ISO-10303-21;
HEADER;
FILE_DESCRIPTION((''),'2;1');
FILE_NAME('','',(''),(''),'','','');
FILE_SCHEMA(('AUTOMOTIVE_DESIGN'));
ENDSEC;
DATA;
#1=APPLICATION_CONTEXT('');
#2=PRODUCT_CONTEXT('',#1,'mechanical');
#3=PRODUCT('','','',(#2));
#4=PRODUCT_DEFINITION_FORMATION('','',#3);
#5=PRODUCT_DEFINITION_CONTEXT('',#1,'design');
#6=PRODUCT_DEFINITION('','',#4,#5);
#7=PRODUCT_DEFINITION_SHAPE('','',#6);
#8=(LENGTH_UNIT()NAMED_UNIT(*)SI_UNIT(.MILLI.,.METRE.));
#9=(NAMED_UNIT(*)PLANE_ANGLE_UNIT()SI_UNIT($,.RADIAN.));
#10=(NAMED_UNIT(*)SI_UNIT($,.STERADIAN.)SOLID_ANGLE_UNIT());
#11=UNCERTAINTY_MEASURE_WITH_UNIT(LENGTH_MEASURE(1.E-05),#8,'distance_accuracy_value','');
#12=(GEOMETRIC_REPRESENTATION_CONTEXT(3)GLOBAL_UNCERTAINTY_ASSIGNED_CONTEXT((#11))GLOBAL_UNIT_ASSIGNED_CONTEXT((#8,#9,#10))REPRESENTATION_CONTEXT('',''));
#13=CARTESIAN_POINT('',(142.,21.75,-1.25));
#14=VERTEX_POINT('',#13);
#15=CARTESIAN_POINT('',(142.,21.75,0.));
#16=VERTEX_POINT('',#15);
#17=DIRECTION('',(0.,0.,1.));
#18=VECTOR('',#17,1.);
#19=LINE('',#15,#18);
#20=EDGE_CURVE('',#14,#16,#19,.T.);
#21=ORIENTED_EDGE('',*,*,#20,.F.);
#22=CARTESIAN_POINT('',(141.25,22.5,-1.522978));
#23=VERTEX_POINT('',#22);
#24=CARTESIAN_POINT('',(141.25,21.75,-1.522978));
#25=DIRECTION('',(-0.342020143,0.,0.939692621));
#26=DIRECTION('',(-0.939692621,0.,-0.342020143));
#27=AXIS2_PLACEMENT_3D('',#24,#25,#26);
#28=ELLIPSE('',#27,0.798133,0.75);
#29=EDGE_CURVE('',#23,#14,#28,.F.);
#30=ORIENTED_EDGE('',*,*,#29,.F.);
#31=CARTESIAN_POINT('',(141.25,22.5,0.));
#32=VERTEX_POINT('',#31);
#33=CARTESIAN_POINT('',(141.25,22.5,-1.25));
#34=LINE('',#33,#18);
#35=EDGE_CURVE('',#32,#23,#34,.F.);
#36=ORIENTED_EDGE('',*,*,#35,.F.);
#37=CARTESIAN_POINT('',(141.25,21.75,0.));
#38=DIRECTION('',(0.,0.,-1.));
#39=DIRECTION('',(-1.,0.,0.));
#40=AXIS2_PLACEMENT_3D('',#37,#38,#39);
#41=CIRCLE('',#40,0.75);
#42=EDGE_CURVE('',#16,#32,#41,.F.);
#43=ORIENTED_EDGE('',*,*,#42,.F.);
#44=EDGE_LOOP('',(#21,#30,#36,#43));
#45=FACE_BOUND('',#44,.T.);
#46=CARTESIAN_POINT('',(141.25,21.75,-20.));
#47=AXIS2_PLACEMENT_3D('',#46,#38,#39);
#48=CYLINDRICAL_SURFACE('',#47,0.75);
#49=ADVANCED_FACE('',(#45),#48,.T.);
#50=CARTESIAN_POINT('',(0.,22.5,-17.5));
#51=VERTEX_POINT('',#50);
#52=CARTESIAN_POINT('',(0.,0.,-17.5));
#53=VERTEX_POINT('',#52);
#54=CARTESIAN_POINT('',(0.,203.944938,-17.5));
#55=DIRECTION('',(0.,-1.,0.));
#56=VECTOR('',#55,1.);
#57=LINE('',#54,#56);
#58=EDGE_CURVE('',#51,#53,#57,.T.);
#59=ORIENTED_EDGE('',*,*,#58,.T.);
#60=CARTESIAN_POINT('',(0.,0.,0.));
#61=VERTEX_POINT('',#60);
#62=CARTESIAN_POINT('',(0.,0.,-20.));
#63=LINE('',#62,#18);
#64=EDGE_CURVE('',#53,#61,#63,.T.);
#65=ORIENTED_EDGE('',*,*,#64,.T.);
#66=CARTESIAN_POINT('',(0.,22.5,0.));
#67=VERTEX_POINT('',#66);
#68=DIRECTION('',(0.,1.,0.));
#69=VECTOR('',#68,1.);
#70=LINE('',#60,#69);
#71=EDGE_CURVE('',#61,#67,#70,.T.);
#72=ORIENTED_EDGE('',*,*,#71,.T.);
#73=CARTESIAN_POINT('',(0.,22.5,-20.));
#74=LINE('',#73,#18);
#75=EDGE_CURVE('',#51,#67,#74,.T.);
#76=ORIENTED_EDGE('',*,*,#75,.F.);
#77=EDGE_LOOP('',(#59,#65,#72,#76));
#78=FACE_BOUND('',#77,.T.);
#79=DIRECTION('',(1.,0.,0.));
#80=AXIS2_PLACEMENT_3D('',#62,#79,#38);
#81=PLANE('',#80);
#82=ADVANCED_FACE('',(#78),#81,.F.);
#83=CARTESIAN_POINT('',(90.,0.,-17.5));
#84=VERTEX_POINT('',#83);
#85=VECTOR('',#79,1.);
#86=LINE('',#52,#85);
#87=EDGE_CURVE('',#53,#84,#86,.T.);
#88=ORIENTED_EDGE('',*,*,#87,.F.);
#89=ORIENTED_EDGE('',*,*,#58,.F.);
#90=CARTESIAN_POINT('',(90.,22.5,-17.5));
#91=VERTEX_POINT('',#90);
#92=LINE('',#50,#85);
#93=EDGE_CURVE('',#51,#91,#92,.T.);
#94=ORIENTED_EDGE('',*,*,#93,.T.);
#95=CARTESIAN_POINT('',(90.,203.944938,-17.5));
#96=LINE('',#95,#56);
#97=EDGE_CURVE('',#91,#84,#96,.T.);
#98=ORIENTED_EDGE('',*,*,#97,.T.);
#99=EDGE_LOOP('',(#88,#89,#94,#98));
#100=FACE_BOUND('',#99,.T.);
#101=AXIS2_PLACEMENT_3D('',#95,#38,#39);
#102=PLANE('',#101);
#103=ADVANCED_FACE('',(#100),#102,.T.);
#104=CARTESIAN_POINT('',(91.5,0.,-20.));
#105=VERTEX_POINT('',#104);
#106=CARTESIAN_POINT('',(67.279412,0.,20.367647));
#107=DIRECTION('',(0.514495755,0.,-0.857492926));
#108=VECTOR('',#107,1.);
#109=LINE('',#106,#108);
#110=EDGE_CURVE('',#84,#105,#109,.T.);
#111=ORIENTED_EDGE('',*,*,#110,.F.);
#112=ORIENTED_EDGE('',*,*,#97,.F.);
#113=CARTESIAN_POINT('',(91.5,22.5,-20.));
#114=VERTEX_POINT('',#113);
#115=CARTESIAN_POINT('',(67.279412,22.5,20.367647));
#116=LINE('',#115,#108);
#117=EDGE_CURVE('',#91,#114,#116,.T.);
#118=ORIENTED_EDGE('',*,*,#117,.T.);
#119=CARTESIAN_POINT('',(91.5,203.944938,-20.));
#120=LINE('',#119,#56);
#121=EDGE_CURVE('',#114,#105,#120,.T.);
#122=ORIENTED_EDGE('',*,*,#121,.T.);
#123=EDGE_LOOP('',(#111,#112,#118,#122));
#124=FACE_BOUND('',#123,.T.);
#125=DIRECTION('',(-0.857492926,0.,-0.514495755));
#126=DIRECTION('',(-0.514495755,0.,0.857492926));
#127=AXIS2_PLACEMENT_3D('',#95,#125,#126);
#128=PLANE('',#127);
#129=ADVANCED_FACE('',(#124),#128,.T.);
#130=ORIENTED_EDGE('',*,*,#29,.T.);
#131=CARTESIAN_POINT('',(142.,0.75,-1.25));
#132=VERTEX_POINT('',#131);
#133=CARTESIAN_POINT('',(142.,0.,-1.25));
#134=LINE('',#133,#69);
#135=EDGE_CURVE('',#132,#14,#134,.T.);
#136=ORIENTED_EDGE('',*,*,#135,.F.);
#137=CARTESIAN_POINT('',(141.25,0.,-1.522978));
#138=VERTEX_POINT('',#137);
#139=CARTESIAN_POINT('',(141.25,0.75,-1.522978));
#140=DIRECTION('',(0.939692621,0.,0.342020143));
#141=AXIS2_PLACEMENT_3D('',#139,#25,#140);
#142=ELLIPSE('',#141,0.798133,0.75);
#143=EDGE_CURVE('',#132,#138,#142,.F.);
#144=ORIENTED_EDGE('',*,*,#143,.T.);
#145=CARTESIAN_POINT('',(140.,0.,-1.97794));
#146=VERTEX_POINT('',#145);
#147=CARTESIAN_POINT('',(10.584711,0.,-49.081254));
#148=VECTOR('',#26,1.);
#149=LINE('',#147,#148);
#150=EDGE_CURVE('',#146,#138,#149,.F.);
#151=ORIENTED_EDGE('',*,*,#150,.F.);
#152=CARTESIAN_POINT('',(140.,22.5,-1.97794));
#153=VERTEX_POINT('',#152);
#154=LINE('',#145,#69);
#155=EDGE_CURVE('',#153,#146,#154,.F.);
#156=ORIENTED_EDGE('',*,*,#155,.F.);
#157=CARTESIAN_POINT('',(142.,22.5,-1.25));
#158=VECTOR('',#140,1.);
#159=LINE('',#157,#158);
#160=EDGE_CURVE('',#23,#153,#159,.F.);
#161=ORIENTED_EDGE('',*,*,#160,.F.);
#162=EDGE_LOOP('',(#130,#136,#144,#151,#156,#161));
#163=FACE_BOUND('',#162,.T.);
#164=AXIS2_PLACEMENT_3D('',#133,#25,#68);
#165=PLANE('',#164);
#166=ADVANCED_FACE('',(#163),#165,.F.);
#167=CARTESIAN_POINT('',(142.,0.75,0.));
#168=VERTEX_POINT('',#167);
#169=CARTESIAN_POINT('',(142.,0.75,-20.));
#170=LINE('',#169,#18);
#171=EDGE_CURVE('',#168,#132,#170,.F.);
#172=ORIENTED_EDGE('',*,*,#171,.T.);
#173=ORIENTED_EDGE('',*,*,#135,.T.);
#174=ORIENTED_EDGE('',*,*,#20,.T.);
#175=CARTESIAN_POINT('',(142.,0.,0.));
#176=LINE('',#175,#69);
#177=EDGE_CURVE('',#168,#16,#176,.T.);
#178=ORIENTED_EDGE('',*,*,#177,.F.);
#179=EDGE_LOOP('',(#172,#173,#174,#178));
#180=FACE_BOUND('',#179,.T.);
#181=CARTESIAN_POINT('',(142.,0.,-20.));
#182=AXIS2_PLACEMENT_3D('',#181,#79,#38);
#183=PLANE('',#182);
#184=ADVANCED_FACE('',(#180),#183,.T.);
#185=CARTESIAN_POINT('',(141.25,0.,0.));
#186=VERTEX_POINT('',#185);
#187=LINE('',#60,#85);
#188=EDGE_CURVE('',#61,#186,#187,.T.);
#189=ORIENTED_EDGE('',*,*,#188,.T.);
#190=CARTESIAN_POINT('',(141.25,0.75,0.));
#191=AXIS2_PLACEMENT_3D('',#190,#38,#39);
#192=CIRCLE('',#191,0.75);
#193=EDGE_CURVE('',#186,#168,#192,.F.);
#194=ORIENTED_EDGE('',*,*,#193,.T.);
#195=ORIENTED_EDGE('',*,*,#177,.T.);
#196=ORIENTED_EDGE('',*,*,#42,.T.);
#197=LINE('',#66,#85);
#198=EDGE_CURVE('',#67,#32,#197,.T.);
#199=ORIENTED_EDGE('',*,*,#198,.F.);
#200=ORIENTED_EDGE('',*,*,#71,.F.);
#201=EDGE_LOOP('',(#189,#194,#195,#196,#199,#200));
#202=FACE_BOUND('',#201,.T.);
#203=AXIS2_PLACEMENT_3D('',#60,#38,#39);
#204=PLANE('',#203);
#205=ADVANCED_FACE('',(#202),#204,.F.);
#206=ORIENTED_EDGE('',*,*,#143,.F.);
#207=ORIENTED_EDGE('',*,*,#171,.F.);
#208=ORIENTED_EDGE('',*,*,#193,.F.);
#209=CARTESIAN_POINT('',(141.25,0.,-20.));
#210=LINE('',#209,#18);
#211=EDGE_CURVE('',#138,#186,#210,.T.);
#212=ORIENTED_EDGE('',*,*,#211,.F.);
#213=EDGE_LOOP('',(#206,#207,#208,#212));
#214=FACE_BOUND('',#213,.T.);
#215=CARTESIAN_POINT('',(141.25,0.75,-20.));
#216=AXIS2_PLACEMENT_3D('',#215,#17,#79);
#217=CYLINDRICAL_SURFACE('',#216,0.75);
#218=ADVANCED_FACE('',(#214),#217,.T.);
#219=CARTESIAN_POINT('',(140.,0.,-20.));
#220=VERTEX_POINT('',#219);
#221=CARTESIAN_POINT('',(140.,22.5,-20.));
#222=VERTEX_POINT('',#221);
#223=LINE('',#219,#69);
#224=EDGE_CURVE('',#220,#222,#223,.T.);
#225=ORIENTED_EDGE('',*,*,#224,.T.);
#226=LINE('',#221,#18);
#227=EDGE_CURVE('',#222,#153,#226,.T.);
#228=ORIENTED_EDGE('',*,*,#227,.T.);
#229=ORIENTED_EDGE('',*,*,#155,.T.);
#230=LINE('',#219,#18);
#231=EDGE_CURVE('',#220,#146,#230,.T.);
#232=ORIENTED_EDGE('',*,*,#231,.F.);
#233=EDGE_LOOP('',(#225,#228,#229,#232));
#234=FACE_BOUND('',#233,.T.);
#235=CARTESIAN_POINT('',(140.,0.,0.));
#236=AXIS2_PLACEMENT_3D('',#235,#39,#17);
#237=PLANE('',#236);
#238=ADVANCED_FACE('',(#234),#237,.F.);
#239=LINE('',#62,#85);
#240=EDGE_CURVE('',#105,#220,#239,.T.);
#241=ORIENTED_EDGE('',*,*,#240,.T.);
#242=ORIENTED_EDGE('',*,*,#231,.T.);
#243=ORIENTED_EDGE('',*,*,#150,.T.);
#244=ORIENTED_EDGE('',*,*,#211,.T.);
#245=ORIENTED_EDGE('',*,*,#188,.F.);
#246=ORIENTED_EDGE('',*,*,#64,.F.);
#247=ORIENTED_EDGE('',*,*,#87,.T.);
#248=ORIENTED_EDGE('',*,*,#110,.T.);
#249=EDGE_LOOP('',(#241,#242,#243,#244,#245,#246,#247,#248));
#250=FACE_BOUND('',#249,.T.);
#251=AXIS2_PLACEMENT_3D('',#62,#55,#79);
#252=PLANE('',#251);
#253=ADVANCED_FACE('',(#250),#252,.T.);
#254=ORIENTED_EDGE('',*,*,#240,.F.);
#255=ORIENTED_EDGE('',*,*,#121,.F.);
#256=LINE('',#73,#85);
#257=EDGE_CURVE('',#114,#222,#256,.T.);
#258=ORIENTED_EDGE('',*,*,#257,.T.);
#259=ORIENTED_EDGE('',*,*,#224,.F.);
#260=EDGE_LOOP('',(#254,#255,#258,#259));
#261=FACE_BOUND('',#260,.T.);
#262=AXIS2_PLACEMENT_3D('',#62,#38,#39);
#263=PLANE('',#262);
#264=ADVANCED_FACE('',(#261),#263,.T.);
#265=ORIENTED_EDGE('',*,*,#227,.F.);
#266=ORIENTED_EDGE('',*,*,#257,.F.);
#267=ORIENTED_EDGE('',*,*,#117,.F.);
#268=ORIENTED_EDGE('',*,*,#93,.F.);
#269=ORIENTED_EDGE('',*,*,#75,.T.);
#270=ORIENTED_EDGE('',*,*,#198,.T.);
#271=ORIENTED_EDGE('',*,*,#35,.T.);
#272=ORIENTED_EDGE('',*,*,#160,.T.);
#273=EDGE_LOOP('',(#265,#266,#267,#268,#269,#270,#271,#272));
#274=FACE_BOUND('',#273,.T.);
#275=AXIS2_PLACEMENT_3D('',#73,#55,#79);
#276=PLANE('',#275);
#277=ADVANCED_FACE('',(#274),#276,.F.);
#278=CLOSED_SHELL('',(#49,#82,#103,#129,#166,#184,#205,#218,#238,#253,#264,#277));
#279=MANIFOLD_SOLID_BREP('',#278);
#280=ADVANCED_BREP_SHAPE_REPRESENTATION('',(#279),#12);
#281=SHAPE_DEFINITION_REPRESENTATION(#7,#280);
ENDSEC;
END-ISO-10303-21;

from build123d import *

# Parameters (mm, degrees)
SKETCH1_W               = 22.5
SKETCH1_H               = 142
BOSS_EXTRUDE1_DEPTH     = 20
SKETCH2_W               = 22.5
SKETCH2_H               = 18
CUT_EXTRUDE1_DEPTH      = 2
CHAMFER5_SIZE           = 2.060608065
CHAMFER5_SIZE_2         = 0.75
FILLET5_R               = 0.75
CUT_EXTRUDE4_DEPTH      = 146.155950619
CUT_EXTRUDE4_DEPTH_BACK = 146.155950619


with BuildPart() as part:
    # Sketch1 → Boss-Extrude1 (new body)
    with BuildSketch(Plane(origin=(0, 0, 0), x_dir=(0, 1, 0), z_dir=(0, 0, 1))):
        with Locations((11.25, -71)):
            Rectangle(SKETCH1_W, SKETCH1_H)
    extrude(amount=-BOSS_EXTRUDE1_DEPTH)

    # Sketch2 → Cut-Extrude1 (cut)
    with BuildSketch(Plane.YZ.offset(142)):
        with Locations((11.25, -11)):
            Rectangle(SKETCH2_W, SKETCH2_H)
    extrude(amount=-CUT_EXTRUDE1_DEPTH, mode=Mode.SUBTRACT)

    # Chamfer5
    # the kernel refuses this chamfer: 2.060608065, 0.75 mm, written as the material it takes off along each edge
    with BuildSketch(Plane(origin=(142, 27.845618587, -2), x_dir=(-0.9999130865277316, 0, -0.013184058198645886), z_dir=(0, -1, 0))) as chamfer5_piece_1_section:
        Polygon((CHAMFER5_SIZE * 0.999913086329, -CHAMFER5_SIZE * 0.013184058196), (-CHAMFER5_SIZE_2 * 0.0131840581986, -CHAMFER5_SIZE_2 * 0.999913086528), (0, 0), align=None)
    chamfer5_piece_1 = extrude(amount=33.191237174, mode=Mode.PRIVATE)
    chamfer5_piece_1 = split(chamfer5_piece_1, bisect_by=Plane(origin=(140, 11.25, -1.766801206), z_dir=(1, 0, 0)), keep=Keep.TOP, mode=Mode.PRIVATE)
    add(chamfer5_piece_1, mode=Mode.SUBTRACT)

    # Fillet5
    fillet5_edges = [part.edges().sort_by_distance(p)[0] for p in [
        (142, 0, -0.625),
        (142, 22.5, -0.625),
    ]]
    fillet(fillet5_edges, radius=FILLET5_R)

    # Sketch6 → Cut-Extrude4 (cut, two sides: drawn at the far end of the back side and taken through both)
    with BuildSketch(Plane(origin=(0, 22.5, 0), x_dir=(-1, 0, 0), z_dir=(0, 1, 0)).offset(-CUT_EXTRUDE4_DEPTH_BACK)):
        Polygon((0, -17.5), (-90, -17.5), (-91.5, -20), (-90, -20), (0, -20), align=None)
    extrude(amount=CUT_EXTRUDE4_DEPTH + CUT_EXTRUDE4_DEPTH_BACK, mode=Mode.SUBTRACT)


solid = part.part
